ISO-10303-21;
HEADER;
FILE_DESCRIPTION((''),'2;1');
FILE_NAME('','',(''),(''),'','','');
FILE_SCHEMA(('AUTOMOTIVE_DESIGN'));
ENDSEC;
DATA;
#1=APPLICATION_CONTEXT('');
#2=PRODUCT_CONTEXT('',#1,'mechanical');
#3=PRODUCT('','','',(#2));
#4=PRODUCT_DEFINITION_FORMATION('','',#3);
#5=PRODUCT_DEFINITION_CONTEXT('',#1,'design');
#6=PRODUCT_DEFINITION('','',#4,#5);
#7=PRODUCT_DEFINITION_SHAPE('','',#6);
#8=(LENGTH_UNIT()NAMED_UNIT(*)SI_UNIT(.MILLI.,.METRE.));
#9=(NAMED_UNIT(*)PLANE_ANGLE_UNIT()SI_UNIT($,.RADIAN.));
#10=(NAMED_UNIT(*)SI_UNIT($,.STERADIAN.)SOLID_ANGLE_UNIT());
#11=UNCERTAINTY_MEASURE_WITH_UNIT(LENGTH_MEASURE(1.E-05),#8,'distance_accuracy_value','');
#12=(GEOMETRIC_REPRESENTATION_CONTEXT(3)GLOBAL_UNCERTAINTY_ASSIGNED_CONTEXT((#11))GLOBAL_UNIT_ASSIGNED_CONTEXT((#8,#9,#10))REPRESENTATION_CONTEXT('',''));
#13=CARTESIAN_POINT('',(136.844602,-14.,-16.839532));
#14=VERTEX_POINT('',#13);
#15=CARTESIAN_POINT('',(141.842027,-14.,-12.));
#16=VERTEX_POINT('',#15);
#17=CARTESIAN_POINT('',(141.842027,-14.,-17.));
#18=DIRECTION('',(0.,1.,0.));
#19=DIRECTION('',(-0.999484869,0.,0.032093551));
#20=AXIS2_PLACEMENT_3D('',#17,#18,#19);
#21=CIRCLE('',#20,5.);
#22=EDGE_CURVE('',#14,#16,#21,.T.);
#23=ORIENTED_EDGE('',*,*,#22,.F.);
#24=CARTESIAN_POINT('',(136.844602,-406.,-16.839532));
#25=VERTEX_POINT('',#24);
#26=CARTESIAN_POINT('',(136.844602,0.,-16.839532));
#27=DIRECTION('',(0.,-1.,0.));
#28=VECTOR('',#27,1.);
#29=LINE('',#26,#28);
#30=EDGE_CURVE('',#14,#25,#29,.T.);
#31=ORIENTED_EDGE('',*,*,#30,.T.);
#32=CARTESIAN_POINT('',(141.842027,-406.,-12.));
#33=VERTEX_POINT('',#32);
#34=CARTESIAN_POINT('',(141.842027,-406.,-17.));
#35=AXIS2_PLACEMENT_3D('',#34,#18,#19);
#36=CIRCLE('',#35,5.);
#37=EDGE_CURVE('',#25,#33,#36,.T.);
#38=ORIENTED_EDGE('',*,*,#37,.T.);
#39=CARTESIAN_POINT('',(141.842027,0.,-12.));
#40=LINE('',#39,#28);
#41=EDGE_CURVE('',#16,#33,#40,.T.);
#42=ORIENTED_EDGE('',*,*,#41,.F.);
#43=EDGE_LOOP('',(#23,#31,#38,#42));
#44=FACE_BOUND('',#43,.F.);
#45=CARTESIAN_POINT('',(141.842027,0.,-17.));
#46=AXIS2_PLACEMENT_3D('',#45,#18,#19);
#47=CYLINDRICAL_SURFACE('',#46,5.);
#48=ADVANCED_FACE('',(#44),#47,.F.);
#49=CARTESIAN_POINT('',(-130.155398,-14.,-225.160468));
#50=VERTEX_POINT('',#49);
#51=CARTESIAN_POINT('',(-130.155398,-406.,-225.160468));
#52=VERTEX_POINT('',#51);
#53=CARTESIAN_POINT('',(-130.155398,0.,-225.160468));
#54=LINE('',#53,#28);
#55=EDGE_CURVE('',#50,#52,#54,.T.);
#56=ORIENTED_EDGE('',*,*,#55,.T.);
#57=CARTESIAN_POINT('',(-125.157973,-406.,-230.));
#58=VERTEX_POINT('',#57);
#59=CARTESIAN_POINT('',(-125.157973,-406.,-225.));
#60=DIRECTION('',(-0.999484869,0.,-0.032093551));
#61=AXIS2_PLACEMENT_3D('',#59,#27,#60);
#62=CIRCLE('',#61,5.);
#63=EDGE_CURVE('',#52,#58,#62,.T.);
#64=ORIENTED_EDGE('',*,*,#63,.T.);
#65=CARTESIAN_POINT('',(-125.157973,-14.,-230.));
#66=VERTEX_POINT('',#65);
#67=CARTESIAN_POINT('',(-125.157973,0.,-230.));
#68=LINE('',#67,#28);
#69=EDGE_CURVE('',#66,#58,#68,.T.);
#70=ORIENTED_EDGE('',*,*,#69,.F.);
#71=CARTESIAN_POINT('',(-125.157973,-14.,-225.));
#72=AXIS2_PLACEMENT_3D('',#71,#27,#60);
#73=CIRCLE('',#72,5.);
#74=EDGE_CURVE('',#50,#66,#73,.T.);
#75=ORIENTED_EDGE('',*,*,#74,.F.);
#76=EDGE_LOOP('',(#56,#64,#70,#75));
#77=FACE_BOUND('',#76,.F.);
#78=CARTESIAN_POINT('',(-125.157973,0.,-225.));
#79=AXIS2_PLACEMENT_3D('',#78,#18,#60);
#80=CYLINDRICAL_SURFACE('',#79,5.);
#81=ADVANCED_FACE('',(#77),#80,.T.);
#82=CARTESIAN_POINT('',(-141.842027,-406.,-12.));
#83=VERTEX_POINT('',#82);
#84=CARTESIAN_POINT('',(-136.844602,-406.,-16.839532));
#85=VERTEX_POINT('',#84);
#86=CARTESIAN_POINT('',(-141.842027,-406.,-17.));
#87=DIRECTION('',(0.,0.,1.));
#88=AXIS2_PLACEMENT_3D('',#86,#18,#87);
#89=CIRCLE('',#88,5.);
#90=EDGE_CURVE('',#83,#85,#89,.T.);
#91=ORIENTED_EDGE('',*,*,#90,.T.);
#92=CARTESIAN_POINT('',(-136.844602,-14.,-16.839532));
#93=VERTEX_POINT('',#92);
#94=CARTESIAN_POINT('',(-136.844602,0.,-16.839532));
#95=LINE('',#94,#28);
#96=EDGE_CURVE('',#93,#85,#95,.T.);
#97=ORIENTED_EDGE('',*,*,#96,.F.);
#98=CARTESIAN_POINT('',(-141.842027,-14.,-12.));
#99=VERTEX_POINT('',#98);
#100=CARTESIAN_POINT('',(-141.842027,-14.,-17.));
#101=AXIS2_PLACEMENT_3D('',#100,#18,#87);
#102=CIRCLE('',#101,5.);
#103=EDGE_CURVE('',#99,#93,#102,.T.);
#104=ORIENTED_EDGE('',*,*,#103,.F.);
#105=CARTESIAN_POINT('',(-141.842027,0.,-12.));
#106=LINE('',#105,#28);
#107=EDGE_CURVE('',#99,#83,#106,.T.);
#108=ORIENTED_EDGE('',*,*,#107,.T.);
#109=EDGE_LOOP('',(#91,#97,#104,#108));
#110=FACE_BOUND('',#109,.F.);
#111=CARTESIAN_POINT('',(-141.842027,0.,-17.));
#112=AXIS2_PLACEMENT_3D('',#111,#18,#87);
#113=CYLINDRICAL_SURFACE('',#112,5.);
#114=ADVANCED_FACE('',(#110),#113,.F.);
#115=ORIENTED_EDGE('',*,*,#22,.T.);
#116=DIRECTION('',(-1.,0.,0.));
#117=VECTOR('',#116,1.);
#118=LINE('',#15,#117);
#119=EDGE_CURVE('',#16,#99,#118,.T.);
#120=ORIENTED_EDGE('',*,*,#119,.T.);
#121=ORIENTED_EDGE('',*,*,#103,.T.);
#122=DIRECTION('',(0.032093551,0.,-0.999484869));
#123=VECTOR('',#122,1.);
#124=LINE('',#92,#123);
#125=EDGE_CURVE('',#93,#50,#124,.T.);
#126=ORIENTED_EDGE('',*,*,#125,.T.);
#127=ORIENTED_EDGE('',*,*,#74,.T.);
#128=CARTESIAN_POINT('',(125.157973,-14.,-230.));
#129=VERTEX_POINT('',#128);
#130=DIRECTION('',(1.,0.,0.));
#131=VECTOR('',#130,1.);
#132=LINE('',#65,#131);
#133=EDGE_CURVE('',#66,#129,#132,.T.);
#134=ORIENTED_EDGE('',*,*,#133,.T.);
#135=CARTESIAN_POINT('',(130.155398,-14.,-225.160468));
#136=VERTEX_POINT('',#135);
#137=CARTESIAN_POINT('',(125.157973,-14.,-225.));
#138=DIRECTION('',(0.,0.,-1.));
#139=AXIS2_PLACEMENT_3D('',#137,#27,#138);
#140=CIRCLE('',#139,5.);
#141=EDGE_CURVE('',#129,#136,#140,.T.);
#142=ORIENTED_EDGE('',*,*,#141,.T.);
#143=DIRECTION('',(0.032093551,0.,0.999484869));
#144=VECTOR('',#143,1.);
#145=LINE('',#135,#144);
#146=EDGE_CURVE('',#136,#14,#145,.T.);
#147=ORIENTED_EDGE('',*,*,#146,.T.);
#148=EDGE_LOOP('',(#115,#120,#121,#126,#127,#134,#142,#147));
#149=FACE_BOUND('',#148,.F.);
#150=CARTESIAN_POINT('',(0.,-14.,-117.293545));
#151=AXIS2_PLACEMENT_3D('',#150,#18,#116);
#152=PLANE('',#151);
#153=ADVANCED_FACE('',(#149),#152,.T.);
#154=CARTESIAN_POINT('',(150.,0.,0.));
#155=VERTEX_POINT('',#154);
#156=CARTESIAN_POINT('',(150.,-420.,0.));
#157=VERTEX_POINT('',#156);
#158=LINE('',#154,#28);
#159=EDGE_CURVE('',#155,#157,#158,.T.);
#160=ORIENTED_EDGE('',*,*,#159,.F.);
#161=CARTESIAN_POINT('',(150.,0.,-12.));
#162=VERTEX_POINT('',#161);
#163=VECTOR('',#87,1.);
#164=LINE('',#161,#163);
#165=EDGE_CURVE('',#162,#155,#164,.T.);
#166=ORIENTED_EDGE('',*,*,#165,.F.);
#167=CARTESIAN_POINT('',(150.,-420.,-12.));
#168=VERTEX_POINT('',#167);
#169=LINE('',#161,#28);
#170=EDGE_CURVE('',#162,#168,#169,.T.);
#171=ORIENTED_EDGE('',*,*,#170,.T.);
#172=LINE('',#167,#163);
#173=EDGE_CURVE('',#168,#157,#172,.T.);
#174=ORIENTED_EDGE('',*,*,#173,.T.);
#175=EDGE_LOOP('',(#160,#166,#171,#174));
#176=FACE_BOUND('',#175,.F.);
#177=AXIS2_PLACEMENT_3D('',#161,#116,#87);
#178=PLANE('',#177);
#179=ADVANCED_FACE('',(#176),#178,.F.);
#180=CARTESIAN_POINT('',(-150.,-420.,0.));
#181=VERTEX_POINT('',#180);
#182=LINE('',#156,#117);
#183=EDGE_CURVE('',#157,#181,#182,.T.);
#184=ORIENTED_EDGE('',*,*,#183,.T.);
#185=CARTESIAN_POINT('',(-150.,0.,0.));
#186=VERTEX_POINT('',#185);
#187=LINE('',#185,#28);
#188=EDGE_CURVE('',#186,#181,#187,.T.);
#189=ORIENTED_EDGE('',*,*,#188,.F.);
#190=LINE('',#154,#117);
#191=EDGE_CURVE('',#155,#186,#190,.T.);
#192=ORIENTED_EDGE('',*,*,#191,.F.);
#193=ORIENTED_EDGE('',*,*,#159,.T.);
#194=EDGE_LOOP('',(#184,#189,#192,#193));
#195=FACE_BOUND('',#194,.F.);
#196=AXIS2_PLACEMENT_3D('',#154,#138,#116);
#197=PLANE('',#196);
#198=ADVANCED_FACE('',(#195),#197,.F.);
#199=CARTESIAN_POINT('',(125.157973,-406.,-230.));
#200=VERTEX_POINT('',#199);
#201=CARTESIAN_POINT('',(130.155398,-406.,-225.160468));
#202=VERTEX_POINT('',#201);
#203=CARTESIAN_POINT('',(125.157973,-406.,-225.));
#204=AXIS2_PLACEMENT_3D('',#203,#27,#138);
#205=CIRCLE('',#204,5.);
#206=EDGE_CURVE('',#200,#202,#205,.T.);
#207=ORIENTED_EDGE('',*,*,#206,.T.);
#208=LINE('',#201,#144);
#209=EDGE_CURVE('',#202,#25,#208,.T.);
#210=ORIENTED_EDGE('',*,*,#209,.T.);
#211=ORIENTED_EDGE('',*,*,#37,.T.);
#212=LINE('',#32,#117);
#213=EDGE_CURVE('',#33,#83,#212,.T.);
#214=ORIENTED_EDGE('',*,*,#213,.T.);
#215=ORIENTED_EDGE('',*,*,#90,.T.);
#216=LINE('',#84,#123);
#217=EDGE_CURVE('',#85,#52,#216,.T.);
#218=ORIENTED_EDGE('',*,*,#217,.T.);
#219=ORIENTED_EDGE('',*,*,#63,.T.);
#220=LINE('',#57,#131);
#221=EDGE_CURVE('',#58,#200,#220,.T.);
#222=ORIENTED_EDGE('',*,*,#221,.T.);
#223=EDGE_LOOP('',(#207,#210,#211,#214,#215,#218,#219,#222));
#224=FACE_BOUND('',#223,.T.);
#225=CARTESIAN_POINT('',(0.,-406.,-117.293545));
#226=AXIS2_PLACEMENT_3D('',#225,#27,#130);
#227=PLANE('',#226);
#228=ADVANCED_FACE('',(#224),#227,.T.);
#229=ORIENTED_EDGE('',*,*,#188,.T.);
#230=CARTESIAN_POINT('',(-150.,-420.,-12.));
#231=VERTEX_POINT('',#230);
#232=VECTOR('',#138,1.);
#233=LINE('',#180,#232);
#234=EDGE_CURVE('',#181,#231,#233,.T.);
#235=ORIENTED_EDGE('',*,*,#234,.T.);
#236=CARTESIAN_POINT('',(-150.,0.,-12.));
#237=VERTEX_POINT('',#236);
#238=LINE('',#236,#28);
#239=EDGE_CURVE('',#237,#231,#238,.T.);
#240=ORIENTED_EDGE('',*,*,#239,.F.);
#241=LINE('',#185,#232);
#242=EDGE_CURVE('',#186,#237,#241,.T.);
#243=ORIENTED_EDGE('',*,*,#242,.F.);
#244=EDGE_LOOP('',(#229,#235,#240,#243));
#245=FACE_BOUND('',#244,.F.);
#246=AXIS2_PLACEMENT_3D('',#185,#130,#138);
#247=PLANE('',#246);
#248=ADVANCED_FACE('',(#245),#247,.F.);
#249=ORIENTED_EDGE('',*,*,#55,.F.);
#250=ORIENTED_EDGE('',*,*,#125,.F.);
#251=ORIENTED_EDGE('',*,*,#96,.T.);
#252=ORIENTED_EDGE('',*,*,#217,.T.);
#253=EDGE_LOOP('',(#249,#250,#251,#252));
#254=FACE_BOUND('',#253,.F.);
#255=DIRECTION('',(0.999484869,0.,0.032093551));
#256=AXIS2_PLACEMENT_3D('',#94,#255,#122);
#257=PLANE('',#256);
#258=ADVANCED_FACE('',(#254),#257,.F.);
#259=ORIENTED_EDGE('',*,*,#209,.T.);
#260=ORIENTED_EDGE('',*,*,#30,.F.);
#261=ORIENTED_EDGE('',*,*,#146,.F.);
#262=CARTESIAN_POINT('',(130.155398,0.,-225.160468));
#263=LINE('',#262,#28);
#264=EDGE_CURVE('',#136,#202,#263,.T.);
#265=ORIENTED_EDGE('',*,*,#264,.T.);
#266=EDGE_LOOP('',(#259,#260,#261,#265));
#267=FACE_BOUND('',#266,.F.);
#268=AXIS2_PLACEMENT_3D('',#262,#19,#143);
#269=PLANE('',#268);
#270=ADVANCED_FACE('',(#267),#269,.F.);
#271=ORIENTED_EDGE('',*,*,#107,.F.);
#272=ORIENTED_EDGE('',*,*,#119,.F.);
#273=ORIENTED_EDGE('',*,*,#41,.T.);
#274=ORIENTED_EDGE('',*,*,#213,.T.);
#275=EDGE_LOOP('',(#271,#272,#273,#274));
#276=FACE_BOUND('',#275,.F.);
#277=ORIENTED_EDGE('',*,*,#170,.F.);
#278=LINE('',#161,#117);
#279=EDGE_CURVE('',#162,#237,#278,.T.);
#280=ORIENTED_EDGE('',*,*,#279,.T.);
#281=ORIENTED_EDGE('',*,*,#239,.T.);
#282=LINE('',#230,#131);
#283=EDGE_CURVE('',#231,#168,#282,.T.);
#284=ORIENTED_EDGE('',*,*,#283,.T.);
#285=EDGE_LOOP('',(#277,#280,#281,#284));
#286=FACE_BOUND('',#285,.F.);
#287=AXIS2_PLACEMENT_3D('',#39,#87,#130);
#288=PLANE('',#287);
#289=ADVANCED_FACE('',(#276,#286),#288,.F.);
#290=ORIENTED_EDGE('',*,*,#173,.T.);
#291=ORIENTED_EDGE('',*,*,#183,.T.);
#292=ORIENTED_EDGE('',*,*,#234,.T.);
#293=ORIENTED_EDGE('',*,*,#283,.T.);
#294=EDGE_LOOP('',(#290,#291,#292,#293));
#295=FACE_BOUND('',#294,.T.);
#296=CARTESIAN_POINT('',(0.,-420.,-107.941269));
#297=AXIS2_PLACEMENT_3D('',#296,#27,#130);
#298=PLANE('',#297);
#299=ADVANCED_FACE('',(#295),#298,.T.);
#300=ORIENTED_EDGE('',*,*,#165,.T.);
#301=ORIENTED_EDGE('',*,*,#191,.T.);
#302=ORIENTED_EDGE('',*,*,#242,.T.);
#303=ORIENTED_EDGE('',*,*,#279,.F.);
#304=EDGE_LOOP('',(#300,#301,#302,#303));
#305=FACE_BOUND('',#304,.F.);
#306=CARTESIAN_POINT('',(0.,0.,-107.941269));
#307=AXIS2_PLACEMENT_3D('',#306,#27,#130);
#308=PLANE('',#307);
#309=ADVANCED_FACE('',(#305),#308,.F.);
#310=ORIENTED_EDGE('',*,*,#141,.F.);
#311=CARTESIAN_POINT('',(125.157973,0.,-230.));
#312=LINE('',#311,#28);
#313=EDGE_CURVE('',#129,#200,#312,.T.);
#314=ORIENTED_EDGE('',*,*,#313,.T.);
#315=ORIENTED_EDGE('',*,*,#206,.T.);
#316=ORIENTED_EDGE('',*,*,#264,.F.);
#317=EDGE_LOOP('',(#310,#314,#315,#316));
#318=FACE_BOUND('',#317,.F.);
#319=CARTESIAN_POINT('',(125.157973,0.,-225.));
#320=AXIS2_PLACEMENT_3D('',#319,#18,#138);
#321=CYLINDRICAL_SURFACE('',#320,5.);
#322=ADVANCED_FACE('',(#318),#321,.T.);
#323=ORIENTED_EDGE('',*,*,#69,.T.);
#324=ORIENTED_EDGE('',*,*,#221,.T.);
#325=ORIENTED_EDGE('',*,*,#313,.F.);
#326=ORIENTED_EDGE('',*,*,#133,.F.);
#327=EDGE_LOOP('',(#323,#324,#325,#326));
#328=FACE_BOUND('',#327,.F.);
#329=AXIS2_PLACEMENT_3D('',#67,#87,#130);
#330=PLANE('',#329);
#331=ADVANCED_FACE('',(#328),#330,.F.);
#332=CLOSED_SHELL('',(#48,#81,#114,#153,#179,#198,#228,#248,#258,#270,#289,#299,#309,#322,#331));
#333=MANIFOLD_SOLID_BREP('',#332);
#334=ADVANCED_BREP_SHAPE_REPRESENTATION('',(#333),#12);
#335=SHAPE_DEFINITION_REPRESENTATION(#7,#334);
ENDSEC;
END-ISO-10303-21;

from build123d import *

# Parameters (mm, degrees)
F1_DEPTH = 420
F3_DEPTH = 14


# Not quite as in the source:
# - a pattern or mirror of a feature is missing from the dataset's text; its kind, count and spacing are read off the source's solid


with BuildPart() as f1:
    # F0 (on Front) → F1 (new body)
    with BuildSketch(Plane.XZ):
        with BuildLine():
            Line((150, 0), (0, 0))
            Line((0, 0), (-150, 0))
            Line((-150, 0), (-150, -12))
            Line((-150, -12), (-141.8420265222, -12))
            ThreePointArc((-141.8420265222, -12), (-138.3636891874, -13.4081802125), (-136.8446021756, -16.8395322458))
            Line((-136.8446021756, -16.8395322458), (-130.1553978244, -225.1604677542))
            ThreePointArc((-130.1553978244, -225.1604677542), (-128.6363108126, -228.5918197875), (-125.1579734778, -230))
            Line((-125.1579734778, -230), (0, -230))
            Line((0, -230), (125.1579734778, -230))
            ThreePointArc((125.1579734778, -230), (128.6363108126, -228.5918197875), (130.1553978244, -225.1604677542))
            Line((130.1553978244, -225.1604677542), (136.8446021756, -16.8395322458))
            ThreePointArc((136.8446021756, -16.8395322458), (138.3636891874, -13.4081802125), (141.8420265222, -12))
            Line((141.8420265222, -12), (150, -12))
            Line((150, -12), (150, 0))
        make_face()
    extrude(amount=F1_DEPTH)

    # F2 (on face) → F3 (cut)
    with BuildSketch(Plane.XZ.offset(420)):
        with BuildLine():
            Line((141.8420265222, -12), (-141.8420265222, -12))
            ThreePointArc((-141.8420265222, -12), (-138.3636891874, -13.4081802125), (-136.8446021756, -16.8395322458))
            Line((-136.8446021756, -16.8395322458), (-130.1553978244, -225.1604677542))
            ThreePointArc((-130.1553978244, -225.1604677542), (-128.6363108126, -228.5918197875), (-125.1579734778, -230))
            Line((-125.1579734778, -230), (125.1579734778, -230))
            ThreePointArc((125.1579734778, -230), (128.6363108126, -228.5918197875), (130.1553978244, -225.1604677542))
            Line((130.1553978244, -225.1604677542), (136.8446021756, -16.8395322458))
            ThreePointArc((136.8446021756, -16.8395322458), (138.3636891874, -13.4081802125), (141.8420265222, -12))
        make_face()
    f3 = extrude(amount=-F3_DEPTH, mode=Mode.SUBTRACT)

    # F3_copies: F3 across plane
    add(f3.mirror(Plane.ZX.offset(-210)), mode=Mode.SUBTRACT)


solid = f1.part
